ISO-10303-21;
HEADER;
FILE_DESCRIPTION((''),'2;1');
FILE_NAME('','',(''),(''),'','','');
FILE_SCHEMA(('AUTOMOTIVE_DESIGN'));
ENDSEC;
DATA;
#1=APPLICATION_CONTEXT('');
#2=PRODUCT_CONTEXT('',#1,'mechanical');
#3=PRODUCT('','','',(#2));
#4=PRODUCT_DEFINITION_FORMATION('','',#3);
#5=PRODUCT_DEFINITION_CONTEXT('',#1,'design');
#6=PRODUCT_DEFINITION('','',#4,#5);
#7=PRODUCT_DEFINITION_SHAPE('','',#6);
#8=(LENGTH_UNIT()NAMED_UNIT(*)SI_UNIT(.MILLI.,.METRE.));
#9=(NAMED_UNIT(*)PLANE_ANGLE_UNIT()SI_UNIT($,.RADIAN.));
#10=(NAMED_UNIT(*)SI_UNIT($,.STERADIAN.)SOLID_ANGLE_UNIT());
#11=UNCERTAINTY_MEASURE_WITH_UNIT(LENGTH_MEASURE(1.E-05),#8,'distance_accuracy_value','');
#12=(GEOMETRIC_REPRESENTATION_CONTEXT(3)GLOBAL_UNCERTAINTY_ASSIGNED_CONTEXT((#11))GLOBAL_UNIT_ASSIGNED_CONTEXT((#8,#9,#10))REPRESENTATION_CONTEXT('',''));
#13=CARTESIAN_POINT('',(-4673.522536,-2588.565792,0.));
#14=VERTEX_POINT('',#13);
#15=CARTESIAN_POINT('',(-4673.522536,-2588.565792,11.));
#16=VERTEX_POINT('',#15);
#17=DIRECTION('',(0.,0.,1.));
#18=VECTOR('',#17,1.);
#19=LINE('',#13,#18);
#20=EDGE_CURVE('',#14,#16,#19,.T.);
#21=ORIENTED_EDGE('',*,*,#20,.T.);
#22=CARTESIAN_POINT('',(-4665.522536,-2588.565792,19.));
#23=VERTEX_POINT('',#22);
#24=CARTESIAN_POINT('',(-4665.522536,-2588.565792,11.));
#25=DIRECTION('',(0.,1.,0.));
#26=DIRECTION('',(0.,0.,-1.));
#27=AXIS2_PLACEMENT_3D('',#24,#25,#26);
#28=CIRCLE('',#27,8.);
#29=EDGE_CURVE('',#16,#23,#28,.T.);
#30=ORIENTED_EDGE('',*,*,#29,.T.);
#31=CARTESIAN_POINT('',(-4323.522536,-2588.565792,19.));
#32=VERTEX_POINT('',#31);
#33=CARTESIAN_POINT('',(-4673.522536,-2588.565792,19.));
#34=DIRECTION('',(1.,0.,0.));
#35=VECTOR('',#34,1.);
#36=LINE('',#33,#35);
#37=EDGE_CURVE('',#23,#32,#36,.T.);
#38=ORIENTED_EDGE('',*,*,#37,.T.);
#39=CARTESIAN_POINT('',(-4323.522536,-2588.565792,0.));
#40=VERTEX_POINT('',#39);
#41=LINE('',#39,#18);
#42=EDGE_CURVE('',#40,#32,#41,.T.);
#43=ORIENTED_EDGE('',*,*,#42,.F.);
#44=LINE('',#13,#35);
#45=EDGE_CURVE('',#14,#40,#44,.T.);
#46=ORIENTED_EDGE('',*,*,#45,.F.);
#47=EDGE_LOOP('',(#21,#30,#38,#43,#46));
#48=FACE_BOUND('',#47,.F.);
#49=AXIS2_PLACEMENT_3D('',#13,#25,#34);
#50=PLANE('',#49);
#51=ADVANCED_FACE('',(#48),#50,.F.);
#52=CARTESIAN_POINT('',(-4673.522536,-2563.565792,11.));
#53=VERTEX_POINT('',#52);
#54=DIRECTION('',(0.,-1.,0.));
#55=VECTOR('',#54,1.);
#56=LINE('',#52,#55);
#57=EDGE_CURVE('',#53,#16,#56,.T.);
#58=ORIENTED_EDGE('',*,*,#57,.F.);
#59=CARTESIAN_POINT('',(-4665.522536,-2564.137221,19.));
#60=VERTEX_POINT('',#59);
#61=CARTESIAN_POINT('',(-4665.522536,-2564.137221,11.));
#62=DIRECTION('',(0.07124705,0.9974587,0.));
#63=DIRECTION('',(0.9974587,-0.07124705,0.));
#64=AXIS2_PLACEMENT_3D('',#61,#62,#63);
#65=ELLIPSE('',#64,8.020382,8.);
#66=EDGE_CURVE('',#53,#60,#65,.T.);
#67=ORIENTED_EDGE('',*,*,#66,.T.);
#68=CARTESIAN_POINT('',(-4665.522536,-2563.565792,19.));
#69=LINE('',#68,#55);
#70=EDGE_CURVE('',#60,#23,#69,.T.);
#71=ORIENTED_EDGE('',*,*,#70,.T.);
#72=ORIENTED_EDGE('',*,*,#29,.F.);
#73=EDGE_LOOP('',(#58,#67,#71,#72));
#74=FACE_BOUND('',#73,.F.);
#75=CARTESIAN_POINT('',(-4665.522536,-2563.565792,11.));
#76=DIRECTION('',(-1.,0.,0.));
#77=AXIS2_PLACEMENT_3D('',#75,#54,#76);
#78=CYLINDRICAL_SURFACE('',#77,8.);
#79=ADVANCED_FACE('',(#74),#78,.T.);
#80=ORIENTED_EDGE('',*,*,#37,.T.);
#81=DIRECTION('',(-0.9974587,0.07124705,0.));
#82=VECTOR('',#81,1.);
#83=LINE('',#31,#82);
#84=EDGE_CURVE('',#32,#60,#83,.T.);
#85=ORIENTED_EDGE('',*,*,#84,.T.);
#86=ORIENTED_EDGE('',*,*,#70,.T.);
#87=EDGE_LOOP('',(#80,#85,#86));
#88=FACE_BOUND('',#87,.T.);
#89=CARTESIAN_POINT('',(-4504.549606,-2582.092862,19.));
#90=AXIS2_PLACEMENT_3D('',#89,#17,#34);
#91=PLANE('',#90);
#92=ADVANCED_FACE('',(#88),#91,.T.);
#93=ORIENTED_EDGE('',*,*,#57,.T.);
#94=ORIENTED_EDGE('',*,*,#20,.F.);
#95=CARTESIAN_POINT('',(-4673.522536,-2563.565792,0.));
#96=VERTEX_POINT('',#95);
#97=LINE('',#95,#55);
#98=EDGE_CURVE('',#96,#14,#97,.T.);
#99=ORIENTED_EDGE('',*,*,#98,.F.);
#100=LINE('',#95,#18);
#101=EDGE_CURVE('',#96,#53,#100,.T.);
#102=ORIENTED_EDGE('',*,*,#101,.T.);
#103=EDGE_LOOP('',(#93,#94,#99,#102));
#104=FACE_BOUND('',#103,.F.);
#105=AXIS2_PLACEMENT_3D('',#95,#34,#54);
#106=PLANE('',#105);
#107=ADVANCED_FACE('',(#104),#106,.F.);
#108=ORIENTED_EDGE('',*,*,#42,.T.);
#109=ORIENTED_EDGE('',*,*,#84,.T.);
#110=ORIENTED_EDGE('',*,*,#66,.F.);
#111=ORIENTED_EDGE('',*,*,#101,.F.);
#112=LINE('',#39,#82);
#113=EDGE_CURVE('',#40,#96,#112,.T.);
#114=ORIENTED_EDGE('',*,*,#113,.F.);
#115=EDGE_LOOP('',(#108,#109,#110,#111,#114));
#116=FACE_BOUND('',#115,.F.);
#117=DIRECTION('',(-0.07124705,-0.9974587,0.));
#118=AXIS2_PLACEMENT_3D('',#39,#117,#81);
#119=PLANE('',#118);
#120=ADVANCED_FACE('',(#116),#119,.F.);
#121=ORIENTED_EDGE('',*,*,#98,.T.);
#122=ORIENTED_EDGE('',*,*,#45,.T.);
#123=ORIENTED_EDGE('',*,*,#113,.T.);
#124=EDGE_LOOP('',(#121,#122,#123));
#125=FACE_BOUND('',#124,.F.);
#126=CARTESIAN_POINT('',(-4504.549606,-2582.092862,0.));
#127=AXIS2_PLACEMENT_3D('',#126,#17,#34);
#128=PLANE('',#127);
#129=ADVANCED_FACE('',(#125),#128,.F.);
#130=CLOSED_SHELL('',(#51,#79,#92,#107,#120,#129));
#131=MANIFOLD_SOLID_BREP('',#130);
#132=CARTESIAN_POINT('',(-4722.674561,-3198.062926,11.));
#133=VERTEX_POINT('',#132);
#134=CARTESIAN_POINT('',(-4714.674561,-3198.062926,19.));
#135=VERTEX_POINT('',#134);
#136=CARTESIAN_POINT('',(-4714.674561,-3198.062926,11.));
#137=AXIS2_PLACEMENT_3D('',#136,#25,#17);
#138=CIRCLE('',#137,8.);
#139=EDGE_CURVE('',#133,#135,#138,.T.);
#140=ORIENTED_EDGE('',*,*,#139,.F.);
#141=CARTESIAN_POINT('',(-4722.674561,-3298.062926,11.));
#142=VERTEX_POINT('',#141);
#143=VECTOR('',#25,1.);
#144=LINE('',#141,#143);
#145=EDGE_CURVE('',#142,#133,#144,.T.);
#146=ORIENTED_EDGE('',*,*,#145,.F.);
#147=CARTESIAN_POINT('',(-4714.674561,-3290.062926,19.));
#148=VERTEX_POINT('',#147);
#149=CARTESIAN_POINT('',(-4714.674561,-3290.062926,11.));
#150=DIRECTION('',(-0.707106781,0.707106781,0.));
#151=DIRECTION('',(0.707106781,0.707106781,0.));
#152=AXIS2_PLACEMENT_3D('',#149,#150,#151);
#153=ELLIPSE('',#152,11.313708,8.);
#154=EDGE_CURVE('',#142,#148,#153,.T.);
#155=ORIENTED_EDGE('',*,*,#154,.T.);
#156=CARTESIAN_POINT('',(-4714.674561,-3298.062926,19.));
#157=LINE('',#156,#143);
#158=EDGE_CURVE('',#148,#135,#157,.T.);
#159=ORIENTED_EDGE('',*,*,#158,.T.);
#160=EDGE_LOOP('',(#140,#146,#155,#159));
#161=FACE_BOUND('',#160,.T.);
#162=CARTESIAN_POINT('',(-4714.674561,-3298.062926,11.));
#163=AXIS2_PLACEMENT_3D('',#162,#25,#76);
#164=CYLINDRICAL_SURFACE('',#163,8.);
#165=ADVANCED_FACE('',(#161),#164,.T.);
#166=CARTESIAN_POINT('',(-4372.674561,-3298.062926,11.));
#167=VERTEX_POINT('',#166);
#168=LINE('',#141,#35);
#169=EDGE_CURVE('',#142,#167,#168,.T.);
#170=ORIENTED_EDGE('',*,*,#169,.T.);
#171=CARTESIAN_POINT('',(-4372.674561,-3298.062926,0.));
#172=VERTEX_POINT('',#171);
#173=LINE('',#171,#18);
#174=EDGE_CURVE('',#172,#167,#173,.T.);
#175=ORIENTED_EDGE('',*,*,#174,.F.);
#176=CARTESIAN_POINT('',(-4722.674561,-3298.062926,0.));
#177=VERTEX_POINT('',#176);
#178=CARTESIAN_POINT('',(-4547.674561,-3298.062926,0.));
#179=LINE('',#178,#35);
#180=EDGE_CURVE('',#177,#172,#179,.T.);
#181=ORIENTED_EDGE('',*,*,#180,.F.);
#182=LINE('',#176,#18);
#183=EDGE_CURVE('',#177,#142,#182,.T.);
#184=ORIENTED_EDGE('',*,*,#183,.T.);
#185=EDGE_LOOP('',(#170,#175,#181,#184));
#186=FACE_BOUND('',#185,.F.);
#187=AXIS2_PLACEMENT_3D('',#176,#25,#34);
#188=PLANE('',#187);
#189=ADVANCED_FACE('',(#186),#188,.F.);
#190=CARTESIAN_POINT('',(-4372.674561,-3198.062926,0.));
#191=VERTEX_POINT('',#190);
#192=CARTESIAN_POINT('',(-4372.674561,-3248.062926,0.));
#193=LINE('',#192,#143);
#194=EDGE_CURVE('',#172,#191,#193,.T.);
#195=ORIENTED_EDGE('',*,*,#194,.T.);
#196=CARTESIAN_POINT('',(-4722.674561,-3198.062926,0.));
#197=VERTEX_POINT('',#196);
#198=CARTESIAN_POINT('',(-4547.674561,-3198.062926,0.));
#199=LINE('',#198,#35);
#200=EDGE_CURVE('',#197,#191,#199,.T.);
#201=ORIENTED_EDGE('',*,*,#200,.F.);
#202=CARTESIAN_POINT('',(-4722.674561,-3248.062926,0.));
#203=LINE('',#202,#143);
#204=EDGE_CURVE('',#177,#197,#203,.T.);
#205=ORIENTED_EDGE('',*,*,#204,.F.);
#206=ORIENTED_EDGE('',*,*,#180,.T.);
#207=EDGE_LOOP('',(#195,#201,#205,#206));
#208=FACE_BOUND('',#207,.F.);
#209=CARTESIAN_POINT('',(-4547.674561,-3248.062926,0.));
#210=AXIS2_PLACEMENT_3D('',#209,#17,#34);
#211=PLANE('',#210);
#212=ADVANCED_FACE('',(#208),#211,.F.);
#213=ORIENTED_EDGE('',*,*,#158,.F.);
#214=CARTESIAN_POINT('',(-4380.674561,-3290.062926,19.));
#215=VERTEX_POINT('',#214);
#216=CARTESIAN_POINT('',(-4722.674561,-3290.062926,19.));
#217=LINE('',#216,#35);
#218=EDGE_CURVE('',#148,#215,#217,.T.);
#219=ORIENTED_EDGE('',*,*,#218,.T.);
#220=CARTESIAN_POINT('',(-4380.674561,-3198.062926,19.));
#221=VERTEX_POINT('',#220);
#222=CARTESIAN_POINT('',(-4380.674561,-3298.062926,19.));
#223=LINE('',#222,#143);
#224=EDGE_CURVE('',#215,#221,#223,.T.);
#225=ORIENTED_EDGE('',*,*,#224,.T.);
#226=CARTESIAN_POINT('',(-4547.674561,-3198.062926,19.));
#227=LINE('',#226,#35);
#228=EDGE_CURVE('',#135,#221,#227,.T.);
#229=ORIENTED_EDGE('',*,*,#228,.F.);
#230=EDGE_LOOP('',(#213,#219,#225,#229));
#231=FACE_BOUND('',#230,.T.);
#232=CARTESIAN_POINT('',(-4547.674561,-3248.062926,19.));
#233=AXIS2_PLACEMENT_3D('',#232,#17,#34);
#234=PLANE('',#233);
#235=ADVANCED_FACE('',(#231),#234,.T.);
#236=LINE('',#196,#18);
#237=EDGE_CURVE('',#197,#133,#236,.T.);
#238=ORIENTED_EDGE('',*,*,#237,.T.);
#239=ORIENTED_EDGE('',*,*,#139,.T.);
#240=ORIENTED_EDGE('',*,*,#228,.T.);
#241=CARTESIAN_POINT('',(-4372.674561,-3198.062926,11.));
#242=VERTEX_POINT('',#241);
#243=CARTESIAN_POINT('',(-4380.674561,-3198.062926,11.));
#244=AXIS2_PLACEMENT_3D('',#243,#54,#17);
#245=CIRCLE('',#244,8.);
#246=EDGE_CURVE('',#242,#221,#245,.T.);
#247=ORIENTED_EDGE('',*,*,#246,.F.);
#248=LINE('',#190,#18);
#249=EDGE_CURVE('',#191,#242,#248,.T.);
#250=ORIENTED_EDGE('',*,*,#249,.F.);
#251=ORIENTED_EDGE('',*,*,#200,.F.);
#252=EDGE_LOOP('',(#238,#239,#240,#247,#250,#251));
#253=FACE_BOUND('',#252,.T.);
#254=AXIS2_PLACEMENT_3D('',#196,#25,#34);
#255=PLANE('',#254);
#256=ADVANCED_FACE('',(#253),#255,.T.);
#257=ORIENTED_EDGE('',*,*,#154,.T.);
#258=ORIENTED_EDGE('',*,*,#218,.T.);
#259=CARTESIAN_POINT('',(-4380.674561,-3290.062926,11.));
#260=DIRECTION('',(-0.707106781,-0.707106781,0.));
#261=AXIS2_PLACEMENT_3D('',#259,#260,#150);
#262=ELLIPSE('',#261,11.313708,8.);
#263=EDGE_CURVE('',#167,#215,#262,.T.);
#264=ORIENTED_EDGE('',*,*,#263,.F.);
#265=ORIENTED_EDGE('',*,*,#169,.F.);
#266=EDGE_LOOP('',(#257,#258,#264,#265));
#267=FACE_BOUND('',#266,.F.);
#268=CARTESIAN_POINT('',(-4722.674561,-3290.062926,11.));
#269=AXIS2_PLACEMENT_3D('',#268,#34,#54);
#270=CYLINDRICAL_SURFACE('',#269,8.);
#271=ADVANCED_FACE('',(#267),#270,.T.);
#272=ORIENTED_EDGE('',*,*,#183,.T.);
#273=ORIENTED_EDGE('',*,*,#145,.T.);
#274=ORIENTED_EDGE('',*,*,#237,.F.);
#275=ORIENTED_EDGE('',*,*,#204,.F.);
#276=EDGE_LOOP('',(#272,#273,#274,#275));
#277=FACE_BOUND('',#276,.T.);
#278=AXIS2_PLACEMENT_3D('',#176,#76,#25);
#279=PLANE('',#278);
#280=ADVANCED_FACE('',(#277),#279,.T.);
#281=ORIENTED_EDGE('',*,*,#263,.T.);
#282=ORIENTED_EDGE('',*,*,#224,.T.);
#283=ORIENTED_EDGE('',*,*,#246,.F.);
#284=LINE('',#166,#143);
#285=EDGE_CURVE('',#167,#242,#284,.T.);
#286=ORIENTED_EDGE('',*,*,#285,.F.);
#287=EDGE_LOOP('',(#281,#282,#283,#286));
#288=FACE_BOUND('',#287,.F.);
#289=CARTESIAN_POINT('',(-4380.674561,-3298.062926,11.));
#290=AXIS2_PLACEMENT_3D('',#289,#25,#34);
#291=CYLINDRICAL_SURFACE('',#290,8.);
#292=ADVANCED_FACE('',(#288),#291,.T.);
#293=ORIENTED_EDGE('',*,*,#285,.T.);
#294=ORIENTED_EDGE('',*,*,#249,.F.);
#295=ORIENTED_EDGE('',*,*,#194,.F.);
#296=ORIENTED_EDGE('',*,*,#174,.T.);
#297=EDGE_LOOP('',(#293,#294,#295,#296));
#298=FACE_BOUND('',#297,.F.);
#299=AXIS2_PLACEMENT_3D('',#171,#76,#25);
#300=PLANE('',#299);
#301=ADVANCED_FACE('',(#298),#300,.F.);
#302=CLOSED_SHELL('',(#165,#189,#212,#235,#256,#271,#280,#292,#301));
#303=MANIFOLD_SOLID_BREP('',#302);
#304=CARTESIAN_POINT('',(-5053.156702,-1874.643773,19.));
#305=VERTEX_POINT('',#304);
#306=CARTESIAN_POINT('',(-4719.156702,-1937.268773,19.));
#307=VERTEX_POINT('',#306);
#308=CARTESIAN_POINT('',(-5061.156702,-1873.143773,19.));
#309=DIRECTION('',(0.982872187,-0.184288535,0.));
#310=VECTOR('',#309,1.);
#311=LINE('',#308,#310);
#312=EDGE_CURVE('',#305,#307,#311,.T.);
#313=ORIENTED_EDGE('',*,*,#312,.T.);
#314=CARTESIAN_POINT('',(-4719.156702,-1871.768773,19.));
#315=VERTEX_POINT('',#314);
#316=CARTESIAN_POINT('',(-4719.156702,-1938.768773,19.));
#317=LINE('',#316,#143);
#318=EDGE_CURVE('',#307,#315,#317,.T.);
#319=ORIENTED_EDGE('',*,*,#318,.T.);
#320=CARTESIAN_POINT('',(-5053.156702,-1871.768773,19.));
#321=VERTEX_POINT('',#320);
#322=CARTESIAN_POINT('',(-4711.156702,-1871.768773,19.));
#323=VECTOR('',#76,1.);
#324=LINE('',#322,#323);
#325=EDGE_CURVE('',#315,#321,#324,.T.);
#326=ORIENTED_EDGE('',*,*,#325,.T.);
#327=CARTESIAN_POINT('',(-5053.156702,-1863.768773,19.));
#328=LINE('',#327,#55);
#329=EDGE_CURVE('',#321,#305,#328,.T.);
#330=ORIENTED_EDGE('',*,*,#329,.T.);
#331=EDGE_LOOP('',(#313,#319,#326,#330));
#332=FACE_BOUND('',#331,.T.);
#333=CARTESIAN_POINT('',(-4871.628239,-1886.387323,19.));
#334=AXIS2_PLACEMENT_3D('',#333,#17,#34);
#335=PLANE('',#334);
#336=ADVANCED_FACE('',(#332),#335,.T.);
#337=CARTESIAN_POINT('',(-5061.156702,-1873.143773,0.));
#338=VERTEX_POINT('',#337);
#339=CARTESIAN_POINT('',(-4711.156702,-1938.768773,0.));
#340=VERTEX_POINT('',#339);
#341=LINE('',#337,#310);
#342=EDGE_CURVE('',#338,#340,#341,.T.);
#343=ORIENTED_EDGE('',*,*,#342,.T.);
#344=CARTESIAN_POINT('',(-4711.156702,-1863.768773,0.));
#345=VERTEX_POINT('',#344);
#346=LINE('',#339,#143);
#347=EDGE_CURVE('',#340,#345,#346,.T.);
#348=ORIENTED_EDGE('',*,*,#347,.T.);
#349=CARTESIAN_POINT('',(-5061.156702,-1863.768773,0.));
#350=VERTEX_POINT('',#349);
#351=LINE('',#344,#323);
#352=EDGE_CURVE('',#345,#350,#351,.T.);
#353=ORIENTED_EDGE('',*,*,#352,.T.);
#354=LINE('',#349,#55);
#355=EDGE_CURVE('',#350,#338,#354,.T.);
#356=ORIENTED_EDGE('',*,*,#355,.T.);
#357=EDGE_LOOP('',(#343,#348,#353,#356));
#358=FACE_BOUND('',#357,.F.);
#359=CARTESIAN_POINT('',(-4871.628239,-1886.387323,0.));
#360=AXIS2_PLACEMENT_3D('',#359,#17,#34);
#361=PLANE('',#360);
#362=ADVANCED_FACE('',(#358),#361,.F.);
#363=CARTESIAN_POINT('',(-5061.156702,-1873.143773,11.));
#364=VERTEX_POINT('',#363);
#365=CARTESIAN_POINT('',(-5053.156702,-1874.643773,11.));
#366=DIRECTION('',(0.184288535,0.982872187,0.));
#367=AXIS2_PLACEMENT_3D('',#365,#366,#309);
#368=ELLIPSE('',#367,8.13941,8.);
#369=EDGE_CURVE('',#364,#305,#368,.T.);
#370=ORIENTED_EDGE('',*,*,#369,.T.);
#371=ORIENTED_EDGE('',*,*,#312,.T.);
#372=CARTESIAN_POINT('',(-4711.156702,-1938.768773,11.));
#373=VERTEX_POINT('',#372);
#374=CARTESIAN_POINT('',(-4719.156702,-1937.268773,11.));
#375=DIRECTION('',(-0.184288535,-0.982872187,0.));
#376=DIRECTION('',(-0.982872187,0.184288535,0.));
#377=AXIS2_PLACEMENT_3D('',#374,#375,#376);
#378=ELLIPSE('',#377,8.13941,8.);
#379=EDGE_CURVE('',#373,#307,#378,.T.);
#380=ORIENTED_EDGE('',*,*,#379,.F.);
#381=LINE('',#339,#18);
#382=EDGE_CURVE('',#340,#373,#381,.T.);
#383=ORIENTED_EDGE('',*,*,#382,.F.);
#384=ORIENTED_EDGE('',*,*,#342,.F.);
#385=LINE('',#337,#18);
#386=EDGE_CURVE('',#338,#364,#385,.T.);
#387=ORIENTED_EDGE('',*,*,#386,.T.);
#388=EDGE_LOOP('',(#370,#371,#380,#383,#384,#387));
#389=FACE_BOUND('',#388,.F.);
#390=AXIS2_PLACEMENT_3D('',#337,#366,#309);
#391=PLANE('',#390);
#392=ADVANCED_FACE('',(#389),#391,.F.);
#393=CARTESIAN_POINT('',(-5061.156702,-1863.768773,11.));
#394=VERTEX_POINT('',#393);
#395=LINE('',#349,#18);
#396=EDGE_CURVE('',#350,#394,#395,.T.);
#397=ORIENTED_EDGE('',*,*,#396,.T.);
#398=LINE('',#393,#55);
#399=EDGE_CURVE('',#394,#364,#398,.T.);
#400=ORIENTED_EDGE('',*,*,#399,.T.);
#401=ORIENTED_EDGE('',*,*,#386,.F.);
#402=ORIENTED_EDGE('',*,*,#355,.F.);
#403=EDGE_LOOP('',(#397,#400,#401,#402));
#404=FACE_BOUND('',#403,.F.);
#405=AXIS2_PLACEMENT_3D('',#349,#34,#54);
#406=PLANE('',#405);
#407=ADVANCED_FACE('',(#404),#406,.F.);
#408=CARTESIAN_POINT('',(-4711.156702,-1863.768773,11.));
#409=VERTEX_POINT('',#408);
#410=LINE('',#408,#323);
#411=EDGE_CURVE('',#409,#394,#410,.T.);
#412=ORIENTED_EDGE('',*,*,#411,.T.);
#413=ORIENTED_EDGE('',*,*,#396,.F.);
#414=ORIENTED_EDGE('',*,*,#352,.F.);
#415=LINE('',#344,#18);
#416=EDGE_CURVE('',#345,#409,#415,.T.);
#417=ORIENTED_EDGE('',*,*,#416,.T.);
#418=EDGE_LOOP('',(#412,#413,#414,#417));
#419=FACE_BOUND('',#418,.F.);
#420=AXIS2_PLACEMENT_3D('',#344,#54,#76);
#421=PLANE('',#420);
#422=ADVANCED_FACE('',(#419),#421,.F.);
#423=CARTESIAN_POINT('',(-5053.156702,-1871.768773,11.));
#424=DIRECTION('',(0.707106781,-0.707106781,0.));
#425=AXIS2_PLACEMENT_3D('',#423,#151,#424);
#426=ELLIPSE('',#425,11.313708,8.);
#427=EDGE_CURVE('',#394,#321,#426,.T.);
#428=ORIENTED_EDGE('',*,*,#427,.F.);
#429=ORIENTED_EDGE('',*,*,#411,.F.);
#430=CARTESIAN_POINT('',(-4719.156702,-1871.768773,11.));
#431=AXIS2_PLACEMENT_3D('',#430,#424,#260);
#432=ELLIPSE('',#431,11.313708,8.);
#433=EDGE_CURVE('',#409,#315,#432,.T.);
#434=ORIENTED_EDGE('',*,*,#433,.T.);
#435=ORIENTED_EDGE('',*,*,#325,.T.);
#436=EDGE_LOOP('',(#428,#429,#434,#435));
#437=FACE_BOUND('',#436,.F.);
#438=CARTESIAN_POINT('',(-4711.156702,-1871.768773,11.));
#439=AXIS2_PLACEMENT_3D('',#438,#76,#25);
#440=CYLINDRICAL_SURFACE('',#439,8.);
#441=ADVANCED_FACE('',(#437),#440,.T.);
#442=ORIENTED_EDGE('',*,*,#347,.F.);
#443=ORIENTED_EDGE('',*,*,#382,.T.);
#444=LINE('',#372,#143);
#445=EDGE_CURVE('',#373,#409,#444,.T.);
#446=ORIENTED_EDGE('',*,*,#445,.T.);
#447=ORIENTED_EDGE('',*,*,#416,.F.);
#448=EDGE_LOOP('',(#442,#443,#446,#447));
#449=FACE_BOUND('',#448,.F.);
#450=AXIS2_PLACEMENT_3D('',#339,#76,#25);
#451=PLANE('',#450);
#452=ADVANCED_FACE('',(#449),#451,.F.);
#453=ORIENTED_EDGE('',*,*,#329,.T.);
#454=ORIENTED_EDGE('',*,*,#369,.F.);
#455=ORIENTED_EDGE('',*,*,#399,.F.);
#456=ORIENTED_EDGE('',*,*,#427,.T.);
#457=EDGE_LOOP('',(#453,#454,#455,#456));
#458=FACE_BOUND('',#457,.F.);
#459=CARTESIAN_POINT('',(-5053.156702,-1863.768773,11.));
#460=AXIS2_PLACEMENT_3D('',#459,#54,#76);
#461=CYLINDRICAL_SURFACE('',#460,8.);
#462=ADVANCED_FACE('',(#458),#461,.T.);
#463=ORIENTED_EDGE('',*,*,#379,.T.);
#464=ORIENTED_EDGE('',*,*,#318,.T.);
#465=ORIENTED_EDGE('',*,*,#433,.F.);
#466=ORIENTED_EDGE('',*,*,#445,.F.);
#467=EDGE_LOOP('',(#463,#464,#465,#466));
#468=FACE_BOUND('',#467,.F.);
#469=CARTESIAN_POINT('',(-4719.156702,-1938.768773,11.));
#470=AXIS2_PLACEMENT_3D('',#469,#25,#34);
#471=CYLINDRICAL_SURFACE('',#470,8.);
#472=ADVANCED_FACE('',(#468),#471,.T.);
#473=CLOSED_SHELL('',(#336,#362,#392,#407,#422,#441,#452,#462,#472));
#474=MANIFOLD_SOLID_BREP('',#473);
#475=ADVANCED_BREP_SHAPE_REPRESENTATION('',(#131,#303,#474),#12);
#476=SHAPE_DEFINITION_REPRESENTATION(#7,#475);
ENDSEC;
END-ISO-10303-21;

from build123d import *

# Parameters (mm, degrees)
F0_W     = 350
F0_H     = 100
F3_DEPTH = 19
F4_DEPTH = 19
F5_DEPTH = 19
F6_R     = 8
F6_2_R   = 8
F6_3_R   = 8


# Not quite as in the source:
# - a feature names something its author has since deleted; it is built from what else it names


with BuildPart() as f3:
    # F0 (on Top) → F3 (new body)
    with BuildSketch(Plane.XY):
        with Locations((-4547.6745605469, -3248.0629263303)):
            Rectangle(F0_W, F0_H)
    extrude(amount=F3_DEPTH)

    # F6#3
    f6_3_edges = [f3.edges().sort_by_distance(p)[0] for p in [
        (-4722.674561, -3248.062926, 19),
        (-4372.674561, -3248.062926, 19),
        (-4547.674561, -3298.062926, 19),
    ]]
    fillet(f6_3_edges, radius=F6_3_R)


with BuildPart() as f4:
    # F1 (on Top) → F4 (new body)
    with BuildSketch(Plane.XY):
        Polygon((-4711.1567020416, -1863.7687733282), (-5061.1567020416, -1863.7687733282), (-5061.1567020416, -1873.1437733282), (-4711.1567020416, -1938.7687733282), align=None)
    extrude(amount=F4_DEPTH)

    # F6
    f6_edges = [f4.edges().sort_by_distance(p)[0] for p in [
        (-5061.156702, -1868.456273, 19),
        (-4886.156702, -1863.768773, 19),
        (-4711.156702, -1901.268773, 19),
    ]]
    fillet(f6_edges, radius=F6_R)


with BuildPart() as f5:
    # F2 (on Top) → F5 (new body)
    with BuildSketch(Plane.XY):
        Polygon((-4673.5225359599, -2563.5657919492), (-4673.5225359599, -2588.5657919492), (-4323.5225359599, -2588.5657919492), align=None)
    extrude(amount=F5_DEPTH)

    # F6#2
    f6_2_edges = [f5.edges().sort_by_distance(p)[0] for p in [
        (-4673.522536, -2576.065792, 19),
    ]]
    fillet(f6_2_edges, radius=F6_2_R)


solid = Compound([f3.part, f4.part, f5.part])
